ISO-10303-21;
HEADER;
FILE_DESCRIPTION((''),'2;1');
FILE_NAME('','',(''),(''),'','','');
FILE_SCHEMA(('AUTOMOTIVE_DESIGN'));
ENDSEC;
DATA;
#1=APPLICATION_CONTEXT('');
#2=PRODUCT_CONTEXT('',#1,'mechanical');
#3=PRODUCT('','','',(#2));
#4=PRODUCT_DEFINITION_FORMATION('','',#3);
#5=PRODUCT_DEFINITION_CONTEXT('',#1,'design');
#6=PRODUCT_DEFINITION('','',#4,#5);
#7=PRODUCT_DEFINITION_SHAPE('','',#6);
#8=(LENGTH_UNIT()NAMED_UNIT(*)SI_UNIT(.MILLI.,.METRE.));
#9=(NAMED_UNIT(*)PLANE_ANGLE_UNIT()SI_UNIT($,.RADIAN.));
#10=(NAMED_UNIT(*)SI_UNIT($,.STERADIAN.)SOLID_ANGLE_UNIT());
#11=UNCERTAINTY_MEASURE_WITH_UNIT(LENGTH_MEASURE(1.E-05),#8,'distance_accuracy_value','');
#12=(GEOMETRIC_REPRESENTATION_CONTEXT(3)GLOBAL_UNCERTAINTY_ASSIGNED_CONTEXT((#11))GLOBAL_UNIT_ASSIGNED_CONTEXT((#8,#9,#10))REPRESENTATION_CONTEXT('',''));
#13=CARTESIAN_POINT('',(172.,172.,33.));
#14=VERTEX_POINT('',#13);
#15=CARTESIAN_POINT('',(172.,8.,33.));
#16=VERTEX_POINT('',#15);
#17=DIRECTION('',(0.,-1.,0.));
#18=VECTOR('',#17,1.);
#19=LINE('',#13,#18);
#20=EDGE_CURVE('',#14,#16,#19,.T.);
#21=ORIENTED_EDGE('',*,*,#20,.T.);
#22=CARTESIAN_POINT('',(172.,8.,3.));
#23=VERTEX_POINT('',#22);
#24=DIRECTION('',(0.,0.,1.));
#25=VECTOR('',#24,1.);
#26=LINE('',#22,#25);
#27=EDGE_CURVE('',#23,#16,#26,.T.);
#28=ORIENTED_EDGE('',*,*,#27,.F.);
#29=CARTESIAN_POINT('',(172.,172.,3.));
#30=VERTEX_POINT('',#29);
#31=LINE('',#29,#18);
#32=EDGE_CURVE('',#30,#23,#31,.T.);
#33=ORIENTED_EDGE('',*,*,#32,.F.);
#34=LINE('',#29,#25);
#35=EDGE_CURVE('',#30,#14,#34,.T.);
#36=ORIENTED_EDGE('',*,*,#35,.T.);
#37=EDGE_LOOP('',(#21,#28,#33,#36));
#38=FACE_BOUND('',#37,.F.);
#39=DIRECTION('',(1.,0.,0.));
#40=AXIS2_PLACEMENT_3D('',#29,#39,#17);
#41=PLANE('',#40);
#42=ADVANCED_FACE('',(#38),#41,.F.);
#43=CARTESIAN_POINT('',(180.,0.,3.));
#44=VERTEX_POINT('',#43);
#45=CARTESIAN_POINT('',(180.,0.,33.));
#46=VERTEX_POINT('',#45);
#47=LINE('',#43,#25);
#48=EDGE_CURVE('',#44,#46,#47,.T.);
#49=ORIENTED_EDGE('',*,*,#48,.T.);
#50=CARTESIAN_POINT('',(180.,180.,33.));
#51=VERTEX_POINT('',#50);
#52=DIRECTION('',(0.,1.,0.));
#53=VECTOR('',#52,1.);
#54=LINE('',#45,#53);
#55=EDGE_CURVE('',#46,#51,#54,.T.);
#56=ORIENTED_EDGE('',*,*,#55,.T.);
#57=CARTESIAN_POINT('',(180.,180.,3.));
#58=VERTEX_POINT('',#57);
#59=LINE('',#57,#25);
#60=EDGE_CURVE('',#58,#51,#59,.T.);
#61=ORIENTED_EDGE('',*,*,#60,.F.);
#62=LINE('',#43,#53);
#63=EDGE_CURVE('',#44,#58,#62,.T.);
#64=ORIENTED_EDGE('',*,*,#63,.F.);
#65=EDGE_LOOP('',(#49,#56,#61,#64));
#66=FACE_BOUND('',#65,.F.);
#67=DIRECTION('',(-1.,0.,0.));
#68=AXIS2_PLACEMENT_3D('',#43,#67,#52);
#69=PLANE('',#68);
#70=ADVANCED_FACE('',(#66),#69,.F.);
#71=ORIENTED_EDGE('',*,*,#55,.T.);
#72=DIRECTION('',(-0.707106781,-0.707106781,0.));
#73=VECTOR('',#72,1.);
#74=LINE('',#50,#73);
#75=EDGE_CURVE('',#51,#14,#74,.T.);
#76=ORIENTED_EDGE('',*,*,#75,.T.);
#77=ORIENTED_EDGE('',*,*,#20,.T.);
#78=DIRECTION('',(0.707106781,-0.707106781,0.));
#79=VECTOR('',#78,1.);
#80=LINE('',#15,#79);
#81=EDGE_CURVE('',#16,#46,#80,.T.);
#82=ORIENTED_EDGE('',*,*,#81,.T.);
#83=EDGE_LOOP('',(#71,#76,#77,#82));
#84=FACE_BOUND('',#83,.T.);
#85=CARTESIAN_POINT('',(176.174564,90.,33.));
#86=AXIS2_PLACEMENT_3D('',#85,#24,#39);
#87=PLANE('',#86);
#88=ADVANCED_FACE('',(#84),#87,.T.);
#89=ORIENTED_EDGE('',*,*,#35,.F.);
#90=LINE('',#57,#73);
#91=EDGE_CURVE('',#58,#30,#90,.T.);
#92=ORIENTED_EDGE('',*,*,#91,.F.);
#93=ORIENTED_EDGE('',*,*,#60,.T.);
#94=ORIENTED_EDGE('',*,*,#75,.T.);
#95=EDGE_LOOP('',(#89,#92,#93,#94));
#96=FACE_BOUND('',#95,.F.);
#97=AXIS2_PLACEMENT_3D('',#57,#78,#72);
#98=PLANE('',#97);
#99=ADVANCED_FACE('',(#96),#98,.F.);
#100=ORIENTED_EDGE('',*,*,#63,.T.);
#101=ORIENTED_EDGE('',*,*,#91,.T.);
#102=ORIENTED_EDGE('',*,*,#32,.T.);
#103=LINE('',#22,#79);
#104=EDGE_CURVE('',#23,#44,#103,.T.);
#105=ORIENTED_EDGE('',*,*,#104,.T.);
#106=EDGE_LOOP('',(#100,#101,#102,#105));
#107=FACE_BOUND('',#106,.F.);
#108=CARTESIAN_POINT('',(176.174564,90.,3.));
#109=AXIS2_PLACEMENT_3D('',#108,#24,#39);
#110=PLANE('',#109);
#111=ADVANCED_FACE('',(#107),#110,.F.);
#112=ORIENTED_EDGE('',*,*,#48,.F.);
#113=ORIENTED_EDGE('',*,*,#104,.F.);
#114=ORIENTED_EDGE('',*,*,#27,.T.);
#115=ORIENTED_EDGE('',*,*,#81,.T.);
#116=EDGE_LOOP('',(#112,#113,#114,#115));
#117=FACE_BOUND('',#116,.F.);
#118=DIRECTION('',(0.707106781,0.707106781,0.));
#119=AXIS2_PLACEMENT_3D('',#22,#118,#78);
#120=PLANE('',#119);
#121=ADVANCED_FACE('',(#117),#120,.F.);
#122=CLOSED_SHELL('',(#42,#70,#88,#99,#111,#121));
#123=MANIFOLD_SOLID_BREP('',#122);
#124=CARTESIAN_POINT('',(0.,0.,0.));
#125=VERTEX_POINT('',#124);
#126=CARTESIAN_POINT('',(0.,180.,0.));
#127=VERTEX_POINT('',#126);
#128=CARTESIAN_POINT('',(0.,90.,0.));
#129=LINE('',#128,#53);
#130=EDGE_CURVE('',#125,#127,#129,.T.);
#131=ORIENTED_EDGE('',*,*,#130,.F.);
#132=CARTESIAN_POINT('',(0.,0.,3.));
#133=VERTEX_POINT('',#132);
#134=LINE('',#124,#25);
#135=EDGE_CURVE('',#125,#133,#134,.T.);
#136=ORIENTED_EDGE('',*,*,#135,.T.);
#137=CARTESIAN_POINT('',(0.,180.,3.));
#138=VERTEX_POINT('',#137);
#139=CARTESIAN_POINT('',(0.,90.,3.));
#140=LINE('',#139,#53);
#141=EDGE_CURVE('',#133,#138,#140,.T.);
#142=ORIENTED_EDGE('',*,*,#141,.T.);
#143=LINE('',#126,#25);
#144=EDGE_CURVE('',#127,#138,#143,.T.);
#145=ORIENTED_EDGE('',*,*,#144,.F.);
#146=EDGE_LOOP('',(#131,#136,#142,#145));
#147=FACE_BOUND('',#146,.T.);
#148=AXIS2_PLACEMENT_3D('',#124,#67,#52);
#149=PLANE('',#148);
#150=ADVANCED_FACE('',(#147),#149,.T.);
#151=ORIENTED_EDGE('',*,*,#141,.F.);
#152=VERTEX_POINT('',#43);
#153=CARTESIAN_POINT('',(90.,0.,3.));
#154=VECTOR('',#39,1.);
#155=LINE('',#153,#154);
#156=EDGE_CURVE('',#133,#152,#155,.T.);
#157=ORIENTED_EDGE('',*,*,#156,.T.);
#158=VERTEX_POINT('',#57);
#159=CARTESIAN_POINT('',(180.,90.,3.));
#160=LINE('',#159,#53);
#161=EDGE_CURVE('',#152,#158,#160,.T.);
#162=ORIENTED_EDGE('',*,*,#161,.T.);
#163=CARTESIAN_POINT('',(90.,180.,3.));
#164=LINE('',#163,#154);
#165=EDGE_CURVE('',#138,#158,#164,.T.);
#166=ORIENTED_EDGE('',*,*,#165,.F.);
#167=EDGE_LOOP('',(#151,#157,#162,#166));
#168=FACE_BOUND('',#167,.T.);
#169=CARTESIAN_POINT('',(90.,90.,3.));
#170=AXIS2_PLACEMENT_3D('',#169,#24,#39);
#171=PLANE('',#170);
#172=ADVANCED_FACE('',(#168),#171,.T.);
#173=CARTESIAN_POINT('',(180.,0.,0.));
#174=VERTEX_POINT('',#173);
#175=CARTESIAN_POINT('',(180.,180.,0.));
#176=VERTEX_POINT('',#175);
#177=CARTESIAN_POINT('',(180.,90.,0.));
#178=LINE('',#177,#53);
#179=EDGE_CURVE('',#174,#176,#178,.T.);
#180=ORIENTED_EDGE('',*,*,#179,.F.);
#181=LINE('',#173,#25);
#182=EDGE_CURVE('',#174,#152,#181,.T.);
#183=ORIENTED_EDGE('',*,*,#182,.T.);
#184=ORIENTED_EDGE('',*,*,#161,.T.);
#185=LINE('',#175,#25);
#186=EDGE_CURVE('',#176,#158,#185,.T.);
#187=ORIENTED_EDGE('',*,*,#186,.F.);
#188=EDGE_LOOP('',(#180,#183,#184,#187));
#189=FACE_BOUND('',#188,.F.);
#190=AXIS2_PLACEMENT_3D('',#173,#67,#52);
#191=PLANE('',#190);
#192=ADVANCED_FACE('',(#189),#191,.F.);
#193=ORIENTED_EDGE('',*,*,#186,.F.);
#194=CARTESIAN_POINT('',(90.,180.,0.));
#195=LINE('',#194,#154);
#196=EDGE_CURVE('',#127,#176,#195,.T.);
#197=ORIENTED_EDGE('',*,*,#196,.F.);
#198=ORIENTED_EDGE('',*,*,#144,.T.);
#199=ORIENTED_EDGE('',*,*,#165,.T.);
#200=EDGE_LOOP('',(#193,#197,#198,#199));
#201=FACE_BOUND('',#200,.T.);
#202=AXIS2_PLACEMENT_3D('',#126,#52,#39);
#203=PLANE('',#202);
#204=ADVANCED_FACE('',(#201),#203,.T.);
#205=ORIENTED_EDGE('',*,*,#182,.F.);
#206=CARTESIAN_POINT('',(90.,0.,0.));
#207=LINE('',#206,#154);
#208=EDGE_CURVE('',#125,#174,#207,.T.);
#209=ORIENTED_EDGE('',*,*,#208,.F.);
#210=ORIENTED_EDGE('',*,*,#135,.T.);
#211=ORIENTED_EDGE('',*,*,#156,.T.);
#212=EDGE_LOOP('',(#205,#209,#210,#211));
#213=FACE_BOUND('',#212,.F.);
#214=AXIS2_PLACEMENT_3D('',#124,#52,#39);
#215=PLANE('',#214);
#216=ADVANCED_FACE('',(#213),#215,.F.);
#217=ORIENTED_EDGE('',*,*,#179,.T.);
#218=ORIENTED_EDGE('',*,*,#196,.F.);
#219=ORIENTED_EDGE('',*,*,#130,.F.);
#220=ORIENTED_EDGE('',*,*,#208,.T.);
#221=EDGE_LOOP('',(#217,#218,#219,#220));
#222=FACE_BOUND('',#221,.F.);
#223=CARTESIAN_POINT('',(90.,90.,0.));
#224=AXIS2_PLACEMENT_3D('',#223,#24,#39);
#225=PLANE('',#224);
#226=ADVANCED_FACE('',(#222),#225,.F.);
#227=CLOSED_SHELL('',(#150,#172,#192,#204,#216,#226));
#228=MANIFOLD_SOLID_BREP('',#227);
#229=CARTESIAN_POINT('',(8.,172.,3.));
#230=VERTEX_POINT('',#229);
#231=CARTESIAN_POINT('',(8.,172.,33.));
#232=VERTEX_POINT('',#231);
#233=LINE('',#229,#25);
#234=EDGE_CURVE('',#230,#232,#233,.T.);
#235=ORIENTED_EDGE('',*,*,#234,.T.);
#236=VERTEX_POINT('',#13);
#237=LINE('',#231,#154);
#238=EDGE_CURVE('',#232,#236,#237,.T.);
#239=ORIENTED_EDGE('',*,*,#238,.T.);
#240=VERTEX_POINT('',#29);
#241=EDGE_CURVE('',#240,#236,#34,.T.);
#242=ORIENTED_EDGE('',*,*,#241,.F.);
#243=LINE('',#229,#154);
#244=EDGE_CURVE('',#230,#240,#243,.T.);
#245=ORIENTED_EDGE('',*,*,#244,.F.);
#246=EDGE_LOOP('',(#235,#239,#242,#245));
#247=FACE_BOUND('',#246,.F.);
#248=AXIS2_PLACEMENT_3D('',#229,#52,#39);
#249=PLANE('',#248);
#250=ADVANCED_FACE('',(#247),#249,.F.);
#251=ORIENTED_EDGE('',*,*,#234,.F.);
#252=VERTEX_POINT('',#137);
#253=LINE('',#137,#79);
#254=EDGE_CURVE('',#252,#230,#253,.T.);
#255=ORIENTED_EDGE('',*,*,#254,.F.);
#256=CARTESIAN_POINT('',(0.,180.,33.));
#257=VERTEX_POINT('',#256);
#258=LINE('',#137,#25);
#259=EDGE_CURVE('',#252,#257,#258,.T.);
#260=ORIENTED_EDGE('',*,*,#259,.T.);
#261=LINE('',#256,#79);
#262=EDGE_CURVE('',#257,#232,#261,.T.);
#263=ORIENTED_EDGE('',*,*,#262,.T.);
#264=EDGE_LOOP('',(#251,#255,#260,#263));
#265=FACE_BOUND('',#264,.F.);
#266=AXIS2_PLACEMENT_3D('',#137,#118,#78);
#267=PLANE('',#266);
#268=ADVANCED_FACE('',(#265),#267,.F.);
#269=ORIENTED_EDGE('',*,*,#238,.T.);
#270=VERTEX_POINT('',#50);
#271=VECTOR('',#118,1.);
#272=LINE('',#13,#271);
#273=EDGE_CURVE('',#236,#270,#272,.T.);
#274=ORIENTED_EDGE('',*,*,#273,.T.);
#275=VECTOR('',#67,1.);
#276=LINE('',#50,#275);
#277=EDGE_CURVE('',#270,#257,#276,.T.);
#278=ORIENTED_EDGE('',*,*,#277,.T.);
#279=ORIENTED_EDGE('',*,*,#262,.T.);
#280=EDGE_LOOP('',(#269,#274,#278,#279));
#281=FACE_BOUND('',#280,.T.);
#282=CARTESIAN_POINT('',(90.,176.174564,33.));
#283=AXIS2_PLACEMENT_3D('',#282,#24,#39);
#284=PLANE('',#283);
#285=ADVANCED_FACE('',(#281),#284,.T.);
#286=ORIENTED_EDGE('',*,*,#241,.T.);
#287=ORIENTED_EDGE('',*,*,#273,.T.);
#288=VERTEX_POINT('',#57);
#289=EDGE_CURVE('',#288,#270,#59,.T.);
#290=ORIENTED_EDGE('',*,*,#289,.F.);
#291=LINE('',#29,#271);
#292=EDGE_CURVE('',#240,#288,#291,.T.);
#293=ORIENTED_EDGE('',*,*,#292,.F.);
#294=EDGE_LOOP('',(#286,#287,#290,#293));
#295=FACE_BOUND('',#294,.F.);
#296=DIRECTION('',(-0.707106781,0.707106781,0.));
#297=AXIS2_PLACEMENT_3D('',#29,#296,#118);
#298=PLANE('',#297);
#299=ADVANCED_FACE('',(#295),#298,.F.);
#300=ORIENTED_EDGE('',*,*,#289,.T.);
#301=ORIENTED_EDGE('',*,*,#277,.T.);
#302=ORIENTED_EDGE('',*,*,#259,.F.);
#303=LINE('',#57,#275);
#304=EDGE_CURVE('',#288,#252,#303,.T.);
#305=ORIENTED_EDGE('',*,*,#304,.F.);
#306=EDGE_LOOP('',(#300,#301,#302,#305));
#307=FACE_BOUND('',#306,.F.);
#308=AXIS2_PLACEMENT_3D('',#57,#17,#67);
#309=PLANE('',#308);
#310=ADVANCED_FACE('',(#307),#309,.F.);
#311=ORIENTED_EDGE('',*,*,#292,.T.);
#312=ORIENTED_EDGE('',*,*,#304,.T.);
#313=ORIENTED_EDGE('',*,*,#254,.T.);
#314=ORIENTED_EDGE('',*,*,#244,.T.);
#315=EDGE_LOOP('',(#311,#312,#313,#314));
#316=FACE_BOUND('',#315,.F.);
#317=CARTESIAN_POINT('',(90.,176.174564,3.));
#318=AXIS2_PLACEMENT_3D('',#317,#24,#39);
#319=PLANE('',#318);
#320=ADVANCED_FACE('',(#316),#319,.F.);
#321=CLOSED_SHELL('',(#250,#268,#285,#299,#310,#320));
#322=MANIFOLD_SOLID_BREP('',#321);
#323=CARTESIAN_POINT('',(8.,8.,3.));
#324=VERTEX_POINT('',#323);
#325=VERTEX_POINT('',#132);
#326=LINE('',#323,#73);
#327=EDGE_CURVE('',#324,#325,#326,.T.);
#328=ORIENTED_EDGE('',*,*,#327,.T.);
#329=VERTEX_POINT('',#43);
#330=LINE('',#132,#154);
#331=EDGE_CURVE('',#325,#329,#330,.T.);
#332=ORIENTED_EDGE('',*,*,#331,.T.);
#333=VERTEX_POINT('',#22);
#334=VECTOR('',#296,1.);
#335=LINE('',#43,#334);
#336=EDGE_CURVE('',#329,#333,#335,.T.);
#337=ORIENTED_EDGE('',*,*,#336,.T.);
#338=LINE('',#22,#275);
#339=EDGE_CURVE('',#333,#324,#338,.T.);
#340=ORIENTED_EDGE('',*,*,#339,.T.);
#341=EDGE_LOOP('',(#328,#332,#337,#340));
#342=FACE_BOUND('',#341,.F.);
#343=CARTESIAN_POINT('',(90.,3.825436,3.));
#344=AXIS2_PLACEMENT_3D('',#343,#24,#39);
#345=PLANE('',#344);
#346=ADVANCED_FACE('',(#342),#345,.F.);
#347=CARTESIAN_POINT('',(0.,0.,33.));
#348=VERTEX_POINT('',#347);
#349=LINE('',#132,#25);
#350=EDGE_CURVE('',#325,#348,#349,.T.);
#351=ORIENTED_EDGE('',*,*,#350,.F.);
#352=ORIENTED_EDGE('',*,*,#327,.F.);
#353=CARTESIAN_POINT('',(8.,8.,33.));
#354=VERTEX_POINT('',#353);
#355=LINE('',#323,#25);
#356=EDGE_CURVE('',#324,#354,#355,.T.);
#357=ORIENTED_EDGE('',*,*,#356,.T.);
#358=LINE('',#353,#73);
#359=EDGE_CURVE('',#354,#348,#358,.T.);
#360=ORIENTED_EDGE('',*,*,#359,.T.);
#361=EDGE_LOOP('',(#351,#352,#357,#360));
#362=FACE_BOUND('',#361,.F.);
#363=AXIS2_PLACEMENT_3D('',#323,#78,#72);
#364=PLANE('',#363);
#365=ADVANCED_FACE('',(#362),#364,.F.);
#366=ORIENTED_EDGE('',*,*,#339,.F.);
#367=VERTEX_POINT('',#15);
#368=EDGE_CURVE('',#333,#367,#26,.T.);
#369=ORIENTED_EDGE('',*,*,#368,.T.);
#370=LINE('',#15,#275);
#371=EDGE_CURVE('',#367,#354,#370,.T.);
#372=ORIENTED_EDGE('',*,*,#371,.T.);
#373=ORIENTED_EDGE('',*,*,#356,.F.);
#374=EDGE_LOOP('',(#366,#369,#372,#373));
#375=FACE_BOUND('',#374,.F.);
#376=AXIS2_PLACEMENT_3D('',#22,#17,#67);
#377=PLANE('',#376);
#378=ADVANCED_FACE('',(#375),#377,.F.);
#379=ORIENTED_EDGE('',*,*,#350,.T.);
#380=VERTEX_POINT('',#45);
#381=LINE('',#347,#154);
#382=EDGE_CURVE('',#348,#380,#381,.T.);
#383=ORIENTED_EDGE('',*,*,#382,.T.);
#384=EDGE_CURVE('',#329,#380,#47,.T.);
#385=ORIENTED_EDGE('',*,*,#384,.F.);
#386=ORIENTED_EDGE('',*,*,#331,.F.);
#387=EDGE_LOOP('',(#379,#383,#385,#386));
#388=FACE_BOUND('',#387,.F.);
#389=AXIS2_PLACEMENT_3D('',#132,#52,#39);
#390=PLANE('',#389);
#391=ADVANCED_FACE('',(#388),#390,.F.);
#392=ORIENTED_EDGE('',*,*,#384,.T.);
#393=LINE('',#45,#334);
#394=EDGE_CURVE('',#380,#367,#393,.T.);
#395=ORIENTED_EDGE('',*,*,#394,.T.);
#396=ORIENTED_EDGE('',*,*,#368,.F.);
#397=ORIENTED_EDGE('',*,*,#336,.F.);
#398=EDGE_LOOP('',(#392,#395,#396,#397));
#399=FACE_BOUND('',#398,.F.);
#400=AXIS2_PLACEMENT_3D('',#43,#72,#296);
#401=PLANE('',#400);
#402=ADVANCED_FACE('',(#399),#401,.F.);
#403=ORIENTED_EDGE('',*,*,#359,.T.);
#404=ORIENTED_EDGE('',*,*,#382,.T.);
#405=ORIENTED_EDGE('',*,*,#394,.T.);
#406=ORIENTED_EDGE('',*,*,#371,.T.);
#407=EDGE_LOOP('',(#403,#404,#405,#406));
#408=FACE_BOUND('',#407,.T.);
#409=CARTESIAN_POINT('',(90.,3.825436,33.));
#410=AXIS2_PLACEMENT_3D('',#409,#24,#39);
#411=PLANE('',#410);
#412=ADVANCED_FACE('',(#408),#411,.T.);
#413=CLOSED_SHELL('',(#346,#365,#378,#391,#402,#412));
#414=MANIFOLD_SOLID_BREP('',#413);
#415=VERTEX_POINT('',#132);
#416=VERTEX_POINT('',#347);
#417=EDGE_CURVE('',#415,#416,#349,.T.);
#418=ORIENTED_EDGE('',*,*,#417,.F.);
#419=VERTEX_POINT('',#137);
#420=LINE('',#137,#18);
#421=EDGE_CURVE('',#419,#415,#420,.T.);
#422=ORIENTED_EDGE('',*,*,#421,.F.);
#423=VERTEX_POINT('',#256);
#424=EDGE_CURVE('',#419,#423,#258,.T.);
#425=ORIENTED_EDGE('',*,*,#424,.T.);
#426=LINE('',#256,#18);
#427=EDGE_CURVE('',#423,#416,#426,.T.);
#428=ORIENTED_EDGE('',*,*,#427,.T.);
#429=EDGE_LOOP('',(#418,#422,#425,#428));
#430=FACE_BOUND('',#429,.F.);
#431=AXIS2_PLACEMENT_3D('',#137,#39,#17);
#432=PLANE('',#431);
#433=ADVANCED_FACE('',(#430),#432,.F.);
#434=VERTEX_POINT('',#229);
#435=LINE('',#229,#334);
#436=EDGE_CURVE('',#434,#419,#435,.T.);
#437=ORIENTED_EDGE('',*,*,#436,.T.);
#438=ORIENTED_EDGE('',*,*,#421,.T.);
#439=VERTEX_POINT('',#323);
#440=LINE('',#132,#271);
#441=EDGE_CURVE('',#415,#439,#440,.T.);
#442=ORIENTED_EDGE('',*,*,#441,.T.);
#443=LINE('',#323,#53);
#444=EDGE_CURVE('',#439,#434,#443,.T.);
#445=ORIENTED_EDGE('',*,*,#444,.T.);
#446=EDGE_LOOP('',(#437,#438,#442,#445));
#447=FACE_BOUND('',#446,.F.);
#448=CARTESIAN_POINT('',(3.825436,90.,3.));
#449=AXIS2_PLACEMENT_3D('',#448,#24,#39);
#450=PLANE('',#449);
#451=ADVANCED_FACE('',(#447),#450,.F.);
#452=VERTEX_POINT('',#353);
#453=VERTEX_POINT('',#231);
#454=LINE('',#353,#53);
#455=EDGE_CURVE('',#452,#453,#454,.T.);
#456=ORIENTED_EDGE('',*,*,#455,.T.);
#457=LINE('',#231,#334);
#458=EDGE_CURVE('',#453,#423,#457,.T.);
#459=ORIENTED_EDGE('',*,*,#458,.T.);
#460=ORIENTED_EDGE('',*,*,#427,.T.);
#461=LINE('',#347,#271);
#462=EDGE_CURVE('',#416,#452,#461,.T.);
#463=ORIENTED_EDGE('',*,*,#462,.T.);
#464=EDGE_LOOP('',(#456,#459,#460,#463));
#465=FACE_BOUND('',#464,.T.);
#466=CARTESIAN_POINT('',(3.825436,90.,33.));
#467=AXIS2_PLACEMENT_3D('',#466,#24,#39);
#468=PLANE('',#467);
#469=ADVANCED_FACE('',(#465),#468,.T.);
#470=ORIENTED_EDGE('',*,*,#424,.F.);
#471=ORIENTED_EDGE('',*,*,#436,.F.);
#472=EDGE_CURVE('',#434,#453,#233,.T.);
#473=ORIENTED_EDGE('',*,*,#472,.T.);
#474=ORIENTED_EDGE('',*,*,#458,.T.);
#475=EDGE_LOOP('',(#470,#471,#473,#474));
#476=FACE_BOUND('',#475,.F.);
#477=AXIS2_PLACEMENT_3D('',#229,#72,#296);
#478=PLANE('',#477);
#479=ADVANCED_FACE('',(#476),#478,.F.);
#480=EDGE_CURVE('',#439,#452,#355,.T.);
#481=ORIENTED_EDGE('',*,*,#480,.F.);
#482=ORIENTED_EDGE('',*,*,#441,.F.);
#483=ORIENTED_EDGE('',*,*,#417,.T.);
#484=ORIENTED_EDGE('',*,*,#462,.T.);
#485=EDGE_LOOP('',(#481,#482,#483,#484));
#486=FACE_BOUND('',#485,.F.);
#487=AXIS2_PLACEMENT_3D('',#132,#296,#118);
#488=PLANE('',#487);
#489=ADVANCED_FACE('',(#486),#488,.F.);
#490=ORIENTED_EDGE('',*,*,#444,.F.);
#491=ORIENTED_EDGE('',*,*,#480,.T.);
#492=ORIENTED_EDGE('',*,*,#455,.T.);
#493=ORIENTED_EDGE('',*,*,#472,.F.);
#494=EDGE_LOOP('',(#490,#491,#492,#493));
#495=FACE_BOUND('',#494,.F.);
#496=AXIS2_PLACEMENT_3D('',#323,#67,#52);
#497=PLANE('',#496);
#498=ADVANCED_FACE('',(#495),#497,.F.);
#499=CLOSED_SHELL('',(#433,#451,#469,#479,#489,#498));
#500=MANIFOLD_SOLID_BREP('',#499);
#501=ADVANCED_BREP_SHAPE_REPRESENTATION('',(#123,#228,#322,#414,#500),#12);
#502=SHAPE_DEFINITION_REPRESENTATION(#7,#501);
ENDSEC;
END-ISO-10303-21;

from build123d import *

# Parameters (mm, degrees)
F0_W     = 180
F0_H     = 180
F1_DEPTH = 3
F3_DEPTH = 30
F4_DEPTH = 30
F5_DEPTH = 30
F6_DEPTH = 30


# Not quite as in the source:
# - an extrude ends at something that could not be found from the text; its depth is read off the source's solid


with BuildPart() as f1:
    # F0 (on Top) → F1 (new body)
    with BuildSketch(Plane.XY):
        with Locations((90, 90)):
            Rectangle(F0_W, F0_H)
    extrude(amount=F1_DEPTH)


with BuildPart() as f3:
    # F2 (on face) → F3 (new body)
    with BuildSketch(Plane.XY.offset(3)):
        Polygon((0, 180), (8, 172), (172, 172), (180, 180), align=None)
    extrude(amount=F3_DEPTH)


with BuildPart() as f4:
    # F2 (on face) → F4 (new body, through all)
    with BuildSketch(Plane.XY.offset(3)):
        Polygon((180, 180), (172, 172), (172, 8), (180, 0), align=None)
    extrude(amount=F4_DEPTH)


with BuildPart() as f5:
    # F2 (on face) → F5 (new body, through all)
    with BuildSketch(Plane.XY.offset(3)):
        Polygon((172, 8), (8, 8), (0, 0), (180, 0), align=None)
    extrude(amount=F5_DEPTH)


with BuildPart() as f6:
    # F2 (on face) → F6 (new body, through all)
    with BuildSketch(Plane.XY.offset(3)):
        Polygon((8, 8), (8, 172), (0, 180), (0, 0), align=None)
    extrude(amount=F6_DEPTH)


solid = Compound([f1.part, f3.part, f4.part, f5.part, f6.part])
